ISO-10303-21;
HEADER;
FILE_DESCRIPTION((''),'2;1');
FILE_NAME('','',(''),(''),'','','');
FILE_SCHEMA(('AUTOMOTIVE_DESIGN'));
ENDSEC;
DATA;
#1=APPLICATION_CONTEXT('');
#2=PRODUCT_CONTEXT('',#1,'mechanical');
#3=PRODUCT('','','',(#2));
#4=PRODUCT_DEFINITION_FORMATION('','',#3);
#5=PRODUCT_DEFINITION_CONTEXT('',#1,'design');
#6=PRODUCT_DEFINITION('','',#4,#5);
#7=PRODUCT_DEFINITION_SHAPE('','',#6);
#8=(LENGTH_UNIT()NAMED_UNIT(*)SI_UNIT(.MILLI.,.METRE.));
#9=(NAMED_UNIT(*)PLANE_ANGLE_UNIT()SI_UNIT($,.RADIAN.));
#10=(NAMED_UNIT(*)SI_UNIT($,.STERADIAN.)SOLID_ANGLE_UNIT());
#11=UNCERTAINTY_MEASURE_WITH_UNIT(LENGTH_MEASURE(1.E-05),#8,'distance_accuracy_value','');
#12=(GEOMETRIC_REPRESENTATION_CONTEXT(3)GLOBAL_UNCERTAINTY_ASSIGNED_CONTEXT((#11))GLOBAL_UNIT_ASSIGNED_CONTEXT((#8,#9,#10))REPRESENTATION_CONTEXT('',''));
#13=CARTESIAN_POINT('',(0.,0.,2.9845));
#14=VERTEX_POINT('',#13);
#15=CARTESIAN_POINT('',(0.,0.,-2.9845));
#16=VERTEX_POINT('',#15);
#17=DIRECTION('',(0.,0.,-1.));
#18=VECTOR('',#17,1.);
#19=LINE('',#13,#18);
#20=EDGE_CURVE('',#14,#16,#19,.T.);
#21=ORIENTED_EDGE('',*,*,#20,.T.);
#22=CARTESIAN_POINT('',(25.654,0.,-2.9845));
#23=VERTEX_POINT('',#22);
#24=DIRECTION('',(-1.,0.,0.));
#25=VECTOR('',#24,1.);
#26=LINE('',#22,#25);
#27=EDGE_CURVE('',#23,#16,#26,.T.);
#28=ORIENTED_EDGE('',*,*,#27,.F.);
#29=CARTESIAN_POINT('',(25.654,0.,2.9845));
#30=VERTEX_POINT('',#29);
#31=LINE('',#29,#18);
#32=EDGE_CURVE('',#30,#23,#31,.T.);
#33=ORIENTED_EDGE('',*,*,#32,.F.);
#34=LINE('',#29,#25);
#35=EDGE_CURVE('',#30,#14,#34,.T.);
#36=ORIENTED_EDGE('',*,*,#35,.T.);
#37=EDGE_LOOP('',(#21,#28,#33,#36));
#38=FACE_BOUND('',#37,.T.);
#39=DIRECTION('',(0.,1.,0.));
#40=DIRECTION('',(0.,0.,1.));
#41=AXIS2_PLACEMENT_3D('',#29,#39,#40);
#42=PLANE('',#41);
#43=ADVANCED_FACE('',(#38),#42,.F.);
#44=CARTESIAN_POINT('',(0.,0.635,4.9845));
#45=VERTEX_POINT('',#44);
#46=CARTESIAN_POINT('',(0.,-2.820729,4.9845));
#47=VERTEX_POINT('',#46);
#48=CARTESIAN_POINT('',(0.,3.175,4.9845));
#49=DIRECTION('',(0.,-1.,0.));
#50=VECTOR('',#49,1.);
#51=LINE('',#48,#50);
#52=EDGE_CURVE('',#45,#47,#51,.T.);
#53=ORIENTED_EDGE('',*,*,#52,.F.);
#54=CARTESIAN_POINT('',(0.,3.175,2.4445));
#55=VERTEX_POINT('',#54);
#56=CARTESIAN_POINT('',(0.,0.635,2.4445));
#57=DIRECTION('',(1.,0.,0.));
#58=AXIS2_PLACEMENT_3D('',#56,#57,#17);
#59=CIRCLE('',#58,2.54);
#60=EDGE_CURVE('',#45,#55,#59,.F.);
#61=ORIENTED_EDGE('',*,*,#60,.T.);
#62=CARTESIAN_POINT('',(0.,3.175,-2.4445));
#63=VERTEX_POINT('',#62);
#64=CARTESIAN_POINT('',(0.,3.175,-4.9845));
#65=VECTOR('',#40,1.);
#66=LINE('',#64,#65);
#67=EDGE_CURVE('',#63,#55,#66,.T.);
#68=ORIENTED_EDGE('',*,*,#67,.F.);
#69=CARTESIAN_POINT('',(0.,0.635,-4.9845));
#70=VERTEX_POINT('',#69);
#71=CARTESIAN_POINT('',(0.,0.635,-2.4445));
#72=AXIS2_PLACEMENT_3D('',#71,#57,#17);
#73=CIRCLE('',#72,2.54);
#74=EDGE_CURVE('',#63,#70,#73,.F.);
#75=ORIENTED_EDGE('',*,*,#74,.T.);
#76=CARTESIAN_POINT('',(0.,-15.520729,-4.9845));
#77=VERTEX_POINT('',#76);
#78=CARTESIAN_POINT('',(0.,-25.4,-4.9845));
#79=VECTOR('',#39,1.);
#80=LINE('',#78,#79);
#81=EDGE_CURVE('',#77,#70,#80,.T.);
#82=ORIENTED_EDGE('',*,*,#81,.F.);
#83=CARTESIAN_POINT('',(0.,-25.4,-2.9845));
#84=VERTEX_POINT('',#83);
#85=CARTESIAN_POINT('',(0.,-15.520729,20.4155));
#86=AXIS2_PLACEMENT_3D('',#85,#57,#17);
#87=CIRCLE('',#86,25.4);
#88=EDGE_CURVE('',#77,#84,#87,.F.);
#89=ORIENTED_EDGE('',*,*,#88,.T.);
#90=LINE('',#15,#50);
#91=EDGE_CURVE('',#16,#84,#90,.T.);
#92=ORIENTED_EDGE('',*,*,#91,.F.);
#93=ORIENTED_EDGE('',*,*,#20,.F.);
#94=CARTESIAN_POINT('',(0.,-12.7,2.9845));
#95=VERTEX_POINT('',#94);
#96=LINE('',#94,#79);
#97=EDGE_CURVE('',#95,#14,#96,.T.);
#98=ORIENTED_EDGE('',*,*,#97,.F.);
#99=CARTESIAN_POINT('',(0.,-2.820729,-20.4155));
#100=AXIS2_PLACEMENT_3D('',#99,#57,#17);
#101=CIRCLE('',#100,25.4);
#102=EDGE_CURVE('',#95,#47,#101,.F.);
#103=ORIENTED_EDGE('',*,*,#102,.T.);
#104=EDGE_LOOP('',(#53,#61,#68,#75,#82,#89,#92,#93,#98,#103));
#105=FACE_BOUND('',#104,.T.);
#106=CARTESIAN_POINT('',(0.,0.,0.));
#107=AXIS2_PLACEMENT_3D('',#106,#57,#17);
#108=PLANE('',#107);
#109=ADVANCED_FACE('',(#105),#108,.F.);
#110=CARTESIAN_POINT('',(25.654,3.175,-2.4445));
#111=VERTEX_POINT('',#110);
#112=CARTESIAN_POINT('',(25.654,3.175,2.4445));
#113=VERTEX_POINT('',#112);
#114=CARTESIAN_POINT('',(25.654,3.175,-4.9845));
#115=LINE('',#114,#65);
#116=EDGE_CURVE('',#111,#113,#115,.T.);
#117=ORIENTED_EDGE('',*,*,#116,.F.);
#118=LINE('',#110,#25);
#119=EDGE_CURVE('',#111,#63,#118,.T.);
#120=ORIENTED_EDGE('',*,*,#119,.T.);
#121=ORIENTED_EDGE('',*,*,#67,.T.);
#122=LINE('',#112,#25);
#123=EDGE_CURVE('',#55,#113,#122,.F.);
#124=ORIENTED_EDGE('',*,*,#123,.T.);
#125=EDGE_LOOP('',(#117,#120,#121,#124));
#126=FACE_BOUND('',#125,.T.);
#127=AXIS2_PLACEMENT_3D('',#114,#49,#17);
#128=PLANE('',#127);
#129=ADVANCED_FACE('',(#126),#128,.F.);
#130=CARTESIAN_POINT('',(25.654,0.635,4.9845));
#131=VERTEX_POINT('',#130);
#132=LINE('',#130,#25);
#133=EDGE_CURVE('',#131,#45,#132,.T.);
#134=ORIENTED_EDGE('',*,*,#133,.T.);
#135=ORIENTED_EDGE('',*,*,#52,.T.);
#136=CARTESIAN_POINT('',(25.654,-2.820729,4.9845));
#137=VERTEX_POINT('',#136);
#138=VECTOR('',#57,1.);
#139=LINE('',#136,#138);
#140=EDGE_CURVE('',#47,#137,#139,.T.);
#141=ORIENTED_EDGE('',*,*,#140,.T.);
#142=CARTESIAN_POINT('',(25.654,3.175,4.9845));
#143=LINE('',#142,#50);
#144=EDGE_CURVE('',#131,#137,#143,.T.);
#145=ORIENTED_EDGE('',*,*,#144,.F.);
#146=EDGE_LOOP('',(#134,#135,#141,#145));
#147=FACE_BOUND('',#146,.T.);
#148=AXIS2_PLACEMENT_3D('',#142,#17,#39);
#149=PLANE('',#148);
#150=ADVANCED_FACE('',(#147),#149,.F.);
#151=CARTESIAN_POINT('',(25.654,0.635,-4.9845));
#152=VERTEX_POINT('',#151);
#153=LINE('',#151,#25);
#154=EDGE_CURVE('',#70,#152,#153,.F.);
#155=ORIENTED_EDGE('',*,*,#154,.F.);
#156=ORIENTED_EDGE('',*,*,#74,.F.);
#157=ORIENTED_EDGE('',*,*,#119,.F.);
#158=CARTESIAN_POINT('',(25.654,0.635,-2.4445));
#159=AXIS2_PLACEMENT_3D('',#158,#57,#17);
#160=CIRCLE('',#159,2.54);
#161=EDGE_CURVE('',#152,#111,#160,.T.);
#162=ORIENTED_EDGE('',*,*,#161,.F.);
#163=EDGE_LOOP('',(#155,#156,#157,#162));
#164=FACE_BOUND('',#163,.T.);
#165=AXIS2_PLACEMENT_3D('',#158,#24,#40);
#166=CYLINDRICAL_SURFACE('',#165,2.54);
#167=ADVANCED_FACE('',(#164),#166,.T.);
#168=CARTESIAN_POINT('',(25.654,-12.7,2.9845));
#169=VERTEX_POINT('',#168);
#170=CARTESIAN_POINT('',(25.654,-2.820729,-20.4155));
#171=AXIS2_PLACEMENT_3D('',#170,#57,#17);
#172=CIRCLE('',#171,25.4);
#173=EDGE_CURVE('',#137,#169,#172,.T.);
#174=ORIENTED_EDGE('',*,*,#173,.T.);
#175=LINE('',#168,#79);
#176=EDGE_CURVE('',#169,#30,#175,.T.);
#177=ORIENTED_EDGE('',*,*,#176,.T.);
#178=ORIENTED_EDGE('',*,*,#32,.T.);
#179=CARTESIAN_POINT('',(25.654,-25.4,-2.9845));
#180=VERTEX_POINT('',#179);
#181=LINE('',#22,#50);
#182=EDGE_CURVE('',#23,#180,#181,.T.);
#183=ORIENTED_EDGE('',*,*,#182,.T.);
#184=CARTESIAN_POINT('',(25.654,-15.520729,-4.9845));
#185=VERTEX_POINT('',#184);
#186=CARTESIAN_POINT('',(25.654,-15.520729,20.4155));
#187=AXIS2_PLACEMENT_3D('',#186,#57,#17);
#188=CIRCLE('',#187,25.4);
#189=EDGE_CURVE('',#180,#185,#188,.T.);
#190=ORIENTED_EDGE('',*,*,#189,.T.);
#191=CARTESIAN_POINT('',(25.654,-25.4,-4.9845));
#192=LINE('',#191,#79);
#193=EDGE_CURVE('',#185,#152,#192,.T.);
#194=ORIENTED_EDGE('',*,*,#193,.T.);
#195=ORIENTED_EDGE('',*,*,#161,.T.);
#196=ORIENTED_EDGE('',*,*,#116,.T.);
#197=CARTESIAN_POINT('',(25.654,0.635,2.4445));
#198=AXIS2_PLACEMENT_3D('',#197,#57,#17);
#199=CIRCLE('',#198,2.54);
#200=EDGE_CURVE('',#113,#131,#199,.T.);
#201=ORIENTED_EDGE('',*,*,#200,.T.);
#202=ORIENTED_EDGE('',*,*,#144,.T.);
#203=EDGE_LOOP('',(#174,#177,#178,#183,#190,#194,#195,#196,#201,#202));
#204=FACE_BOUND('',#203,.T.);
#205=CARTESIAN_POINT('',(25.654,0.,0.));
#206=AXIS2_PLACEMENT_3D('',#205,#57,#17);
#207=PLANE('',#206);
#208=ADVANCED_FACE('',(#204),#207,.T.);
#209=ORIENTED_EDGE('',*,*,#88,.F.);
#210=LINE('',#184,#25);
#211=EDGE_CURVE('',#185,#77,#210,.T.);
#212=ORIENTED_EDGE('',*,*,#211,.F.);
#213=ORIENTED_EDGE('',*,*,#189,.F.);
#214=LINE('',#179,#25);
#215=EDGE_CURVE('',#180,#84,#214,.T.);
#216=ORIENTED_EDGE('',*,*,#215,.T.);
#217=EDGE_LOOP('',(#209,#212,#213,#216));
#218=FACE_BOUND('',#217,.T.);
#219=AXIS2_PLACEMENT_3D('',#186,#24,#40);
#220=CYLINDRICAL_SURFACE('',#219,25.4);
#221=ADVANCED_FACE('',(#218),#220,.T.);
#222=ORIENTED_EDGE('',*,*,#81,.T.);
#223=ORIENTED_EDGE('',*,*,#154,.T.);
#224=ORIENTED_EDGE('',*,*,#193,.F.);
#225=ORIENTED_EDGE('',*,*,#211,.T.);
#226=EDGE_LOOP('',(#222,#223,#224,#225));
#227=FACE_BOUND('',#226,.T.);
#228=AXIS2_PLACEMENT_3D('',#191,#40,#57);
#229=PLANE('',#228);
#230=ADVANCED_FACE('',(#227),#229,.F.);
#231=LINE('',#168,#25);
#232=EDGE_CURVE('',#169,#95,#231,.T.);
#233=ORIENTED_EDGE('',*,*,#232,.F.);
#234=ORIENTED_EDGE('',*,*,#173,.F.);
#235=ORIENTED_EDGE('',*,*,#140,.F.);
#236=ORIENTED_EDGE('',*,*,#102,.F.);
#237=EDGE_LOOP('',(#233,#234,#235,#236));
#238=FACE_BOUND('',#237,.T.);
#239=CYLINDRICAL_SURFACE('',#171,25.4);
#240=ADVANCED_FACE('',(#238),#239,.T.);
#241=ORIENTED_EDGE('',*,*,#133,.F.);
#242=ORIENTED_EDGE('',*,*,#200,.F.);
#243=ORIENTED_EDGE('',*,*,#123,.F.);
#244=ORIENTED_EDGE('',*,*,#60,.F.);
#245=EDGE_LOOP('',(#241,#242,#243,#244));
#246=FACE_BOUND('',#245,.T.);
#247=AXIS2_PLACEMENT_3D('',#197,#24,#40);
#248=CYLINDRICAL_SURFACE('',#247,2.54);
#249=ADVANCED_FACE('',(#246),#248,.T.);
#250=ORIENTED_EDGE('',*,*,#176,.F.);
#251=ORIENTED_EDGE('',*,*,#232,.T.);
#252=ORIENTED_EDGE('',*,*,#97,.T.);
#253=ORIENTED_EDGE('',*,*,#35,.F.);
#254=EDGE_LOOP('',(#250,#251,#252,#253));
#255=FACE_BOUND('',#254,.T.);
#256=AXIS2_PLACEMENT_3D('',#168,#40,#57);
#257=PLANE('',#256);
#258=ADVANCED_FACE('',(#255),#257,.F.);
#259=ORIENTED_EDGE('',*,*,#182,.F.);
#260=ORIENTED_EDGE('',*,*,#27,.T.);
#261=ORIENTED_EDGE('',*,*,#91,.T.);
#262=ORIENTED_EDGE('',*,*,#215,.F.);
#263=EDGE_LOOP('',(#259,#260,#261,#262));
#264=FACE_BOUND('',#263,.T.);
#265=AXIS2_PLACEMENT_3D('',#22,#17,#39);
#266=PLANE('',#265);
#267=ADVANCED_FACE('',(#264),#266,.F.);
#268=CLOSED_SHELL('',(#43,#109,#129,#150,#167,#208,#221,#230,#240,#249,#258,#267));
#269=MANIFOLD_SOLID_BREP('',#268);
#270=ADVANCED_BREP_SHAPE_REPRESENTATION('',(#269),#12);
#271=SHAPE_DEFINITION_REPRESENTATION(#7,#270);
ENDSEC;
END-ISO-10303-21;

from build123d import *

# Parameters (mm, degrees)
BOSS_EXTRUDE1_DEPTH = 25.654
FILLET1_R           = 25.4
FILLET2_R           = 2.54


with BuildPart() as part:
    # Sketch1 → Boss-Extrude1 (new body)
    with BuildSketch(Plane(origin=(0, 0, 0), x_dir=(0, 0, -1), z_dir=(1, 0, 0))):
        Polygon((-4.9845, -12.7), (-2.9845, -12.7), (-2.9845, 0), (2.9845, 0), (2.9845, -25.4), (4.9845, -25.4), (4.9845, 3.175), (-4.9845, 3.175), align=None)
    extrude(amount=BOSS_EXTRUDE1_DEPTH)

    # Fillet1
    # the kernel refuses this fillet: 25.4 mm, written as the material it takes off along each edge
    with BuildSketch(Plane(origin=(-24.69817807, -12.7, 4.9845), x_dir=(0, 0, -1), z_dir=(1, 0, 0))) as fillet1_piece_1:
        with BuildLine():
            CenterArc((25.4, 9.879271228), FILLET1_R, 180, 22.889037196)
            Line((0, 9.879271228), (-0.508, 9.879271228))
            Line((-0.508, 9.879271228), (-0.508, 0))
            Line((-0.508, 0), (0, -0.508))
            ThreePointArc((0, -0.508), (1, -0.508), (1.532, -0.197585425))
            Line((1.532, -0.197585425), (2, 0))
        make_face()
    extrude(amount=75.050356141, mode=Mode.SUBTRACT)
    with BuildSketch(Plane(origin=(-24.69817807, -25.4, -4.9845), x_dir=(0, 0, 1), z_dir=(1, 0, 0))) as fillet1_piece_2:
        with BuildLine():
            CenterArc((25.4, -9.879271228), FILLET1_R, 157.110962804, 22.889037196)
            Line((0, -9.879271228), (-0.508, -9.879271228))
            Line((-0.508, -9.879271228), (-0.508, 0))
            Line((-0.508, 0), (0, 0.508))
            ThreePointArc((0, 0.508), (1, 0.508), (1.532, 0.197585425))
            Line((1.532, 0.197585425), (2, 0))
        make_face()
    extrude(amount=75.050356141, mode=Mode.SUBTRACT)

    # Fillet2
    fillet2_edges = [part.edges().sort_by_distance(p)[0] for p in [
        (12.827, 3.175, 4.9845),
        (12.827, 3.175, -4.9845),
    ]]
    fillet(fillet2_edges, radius=FILLET2_R)


solid = part.part
